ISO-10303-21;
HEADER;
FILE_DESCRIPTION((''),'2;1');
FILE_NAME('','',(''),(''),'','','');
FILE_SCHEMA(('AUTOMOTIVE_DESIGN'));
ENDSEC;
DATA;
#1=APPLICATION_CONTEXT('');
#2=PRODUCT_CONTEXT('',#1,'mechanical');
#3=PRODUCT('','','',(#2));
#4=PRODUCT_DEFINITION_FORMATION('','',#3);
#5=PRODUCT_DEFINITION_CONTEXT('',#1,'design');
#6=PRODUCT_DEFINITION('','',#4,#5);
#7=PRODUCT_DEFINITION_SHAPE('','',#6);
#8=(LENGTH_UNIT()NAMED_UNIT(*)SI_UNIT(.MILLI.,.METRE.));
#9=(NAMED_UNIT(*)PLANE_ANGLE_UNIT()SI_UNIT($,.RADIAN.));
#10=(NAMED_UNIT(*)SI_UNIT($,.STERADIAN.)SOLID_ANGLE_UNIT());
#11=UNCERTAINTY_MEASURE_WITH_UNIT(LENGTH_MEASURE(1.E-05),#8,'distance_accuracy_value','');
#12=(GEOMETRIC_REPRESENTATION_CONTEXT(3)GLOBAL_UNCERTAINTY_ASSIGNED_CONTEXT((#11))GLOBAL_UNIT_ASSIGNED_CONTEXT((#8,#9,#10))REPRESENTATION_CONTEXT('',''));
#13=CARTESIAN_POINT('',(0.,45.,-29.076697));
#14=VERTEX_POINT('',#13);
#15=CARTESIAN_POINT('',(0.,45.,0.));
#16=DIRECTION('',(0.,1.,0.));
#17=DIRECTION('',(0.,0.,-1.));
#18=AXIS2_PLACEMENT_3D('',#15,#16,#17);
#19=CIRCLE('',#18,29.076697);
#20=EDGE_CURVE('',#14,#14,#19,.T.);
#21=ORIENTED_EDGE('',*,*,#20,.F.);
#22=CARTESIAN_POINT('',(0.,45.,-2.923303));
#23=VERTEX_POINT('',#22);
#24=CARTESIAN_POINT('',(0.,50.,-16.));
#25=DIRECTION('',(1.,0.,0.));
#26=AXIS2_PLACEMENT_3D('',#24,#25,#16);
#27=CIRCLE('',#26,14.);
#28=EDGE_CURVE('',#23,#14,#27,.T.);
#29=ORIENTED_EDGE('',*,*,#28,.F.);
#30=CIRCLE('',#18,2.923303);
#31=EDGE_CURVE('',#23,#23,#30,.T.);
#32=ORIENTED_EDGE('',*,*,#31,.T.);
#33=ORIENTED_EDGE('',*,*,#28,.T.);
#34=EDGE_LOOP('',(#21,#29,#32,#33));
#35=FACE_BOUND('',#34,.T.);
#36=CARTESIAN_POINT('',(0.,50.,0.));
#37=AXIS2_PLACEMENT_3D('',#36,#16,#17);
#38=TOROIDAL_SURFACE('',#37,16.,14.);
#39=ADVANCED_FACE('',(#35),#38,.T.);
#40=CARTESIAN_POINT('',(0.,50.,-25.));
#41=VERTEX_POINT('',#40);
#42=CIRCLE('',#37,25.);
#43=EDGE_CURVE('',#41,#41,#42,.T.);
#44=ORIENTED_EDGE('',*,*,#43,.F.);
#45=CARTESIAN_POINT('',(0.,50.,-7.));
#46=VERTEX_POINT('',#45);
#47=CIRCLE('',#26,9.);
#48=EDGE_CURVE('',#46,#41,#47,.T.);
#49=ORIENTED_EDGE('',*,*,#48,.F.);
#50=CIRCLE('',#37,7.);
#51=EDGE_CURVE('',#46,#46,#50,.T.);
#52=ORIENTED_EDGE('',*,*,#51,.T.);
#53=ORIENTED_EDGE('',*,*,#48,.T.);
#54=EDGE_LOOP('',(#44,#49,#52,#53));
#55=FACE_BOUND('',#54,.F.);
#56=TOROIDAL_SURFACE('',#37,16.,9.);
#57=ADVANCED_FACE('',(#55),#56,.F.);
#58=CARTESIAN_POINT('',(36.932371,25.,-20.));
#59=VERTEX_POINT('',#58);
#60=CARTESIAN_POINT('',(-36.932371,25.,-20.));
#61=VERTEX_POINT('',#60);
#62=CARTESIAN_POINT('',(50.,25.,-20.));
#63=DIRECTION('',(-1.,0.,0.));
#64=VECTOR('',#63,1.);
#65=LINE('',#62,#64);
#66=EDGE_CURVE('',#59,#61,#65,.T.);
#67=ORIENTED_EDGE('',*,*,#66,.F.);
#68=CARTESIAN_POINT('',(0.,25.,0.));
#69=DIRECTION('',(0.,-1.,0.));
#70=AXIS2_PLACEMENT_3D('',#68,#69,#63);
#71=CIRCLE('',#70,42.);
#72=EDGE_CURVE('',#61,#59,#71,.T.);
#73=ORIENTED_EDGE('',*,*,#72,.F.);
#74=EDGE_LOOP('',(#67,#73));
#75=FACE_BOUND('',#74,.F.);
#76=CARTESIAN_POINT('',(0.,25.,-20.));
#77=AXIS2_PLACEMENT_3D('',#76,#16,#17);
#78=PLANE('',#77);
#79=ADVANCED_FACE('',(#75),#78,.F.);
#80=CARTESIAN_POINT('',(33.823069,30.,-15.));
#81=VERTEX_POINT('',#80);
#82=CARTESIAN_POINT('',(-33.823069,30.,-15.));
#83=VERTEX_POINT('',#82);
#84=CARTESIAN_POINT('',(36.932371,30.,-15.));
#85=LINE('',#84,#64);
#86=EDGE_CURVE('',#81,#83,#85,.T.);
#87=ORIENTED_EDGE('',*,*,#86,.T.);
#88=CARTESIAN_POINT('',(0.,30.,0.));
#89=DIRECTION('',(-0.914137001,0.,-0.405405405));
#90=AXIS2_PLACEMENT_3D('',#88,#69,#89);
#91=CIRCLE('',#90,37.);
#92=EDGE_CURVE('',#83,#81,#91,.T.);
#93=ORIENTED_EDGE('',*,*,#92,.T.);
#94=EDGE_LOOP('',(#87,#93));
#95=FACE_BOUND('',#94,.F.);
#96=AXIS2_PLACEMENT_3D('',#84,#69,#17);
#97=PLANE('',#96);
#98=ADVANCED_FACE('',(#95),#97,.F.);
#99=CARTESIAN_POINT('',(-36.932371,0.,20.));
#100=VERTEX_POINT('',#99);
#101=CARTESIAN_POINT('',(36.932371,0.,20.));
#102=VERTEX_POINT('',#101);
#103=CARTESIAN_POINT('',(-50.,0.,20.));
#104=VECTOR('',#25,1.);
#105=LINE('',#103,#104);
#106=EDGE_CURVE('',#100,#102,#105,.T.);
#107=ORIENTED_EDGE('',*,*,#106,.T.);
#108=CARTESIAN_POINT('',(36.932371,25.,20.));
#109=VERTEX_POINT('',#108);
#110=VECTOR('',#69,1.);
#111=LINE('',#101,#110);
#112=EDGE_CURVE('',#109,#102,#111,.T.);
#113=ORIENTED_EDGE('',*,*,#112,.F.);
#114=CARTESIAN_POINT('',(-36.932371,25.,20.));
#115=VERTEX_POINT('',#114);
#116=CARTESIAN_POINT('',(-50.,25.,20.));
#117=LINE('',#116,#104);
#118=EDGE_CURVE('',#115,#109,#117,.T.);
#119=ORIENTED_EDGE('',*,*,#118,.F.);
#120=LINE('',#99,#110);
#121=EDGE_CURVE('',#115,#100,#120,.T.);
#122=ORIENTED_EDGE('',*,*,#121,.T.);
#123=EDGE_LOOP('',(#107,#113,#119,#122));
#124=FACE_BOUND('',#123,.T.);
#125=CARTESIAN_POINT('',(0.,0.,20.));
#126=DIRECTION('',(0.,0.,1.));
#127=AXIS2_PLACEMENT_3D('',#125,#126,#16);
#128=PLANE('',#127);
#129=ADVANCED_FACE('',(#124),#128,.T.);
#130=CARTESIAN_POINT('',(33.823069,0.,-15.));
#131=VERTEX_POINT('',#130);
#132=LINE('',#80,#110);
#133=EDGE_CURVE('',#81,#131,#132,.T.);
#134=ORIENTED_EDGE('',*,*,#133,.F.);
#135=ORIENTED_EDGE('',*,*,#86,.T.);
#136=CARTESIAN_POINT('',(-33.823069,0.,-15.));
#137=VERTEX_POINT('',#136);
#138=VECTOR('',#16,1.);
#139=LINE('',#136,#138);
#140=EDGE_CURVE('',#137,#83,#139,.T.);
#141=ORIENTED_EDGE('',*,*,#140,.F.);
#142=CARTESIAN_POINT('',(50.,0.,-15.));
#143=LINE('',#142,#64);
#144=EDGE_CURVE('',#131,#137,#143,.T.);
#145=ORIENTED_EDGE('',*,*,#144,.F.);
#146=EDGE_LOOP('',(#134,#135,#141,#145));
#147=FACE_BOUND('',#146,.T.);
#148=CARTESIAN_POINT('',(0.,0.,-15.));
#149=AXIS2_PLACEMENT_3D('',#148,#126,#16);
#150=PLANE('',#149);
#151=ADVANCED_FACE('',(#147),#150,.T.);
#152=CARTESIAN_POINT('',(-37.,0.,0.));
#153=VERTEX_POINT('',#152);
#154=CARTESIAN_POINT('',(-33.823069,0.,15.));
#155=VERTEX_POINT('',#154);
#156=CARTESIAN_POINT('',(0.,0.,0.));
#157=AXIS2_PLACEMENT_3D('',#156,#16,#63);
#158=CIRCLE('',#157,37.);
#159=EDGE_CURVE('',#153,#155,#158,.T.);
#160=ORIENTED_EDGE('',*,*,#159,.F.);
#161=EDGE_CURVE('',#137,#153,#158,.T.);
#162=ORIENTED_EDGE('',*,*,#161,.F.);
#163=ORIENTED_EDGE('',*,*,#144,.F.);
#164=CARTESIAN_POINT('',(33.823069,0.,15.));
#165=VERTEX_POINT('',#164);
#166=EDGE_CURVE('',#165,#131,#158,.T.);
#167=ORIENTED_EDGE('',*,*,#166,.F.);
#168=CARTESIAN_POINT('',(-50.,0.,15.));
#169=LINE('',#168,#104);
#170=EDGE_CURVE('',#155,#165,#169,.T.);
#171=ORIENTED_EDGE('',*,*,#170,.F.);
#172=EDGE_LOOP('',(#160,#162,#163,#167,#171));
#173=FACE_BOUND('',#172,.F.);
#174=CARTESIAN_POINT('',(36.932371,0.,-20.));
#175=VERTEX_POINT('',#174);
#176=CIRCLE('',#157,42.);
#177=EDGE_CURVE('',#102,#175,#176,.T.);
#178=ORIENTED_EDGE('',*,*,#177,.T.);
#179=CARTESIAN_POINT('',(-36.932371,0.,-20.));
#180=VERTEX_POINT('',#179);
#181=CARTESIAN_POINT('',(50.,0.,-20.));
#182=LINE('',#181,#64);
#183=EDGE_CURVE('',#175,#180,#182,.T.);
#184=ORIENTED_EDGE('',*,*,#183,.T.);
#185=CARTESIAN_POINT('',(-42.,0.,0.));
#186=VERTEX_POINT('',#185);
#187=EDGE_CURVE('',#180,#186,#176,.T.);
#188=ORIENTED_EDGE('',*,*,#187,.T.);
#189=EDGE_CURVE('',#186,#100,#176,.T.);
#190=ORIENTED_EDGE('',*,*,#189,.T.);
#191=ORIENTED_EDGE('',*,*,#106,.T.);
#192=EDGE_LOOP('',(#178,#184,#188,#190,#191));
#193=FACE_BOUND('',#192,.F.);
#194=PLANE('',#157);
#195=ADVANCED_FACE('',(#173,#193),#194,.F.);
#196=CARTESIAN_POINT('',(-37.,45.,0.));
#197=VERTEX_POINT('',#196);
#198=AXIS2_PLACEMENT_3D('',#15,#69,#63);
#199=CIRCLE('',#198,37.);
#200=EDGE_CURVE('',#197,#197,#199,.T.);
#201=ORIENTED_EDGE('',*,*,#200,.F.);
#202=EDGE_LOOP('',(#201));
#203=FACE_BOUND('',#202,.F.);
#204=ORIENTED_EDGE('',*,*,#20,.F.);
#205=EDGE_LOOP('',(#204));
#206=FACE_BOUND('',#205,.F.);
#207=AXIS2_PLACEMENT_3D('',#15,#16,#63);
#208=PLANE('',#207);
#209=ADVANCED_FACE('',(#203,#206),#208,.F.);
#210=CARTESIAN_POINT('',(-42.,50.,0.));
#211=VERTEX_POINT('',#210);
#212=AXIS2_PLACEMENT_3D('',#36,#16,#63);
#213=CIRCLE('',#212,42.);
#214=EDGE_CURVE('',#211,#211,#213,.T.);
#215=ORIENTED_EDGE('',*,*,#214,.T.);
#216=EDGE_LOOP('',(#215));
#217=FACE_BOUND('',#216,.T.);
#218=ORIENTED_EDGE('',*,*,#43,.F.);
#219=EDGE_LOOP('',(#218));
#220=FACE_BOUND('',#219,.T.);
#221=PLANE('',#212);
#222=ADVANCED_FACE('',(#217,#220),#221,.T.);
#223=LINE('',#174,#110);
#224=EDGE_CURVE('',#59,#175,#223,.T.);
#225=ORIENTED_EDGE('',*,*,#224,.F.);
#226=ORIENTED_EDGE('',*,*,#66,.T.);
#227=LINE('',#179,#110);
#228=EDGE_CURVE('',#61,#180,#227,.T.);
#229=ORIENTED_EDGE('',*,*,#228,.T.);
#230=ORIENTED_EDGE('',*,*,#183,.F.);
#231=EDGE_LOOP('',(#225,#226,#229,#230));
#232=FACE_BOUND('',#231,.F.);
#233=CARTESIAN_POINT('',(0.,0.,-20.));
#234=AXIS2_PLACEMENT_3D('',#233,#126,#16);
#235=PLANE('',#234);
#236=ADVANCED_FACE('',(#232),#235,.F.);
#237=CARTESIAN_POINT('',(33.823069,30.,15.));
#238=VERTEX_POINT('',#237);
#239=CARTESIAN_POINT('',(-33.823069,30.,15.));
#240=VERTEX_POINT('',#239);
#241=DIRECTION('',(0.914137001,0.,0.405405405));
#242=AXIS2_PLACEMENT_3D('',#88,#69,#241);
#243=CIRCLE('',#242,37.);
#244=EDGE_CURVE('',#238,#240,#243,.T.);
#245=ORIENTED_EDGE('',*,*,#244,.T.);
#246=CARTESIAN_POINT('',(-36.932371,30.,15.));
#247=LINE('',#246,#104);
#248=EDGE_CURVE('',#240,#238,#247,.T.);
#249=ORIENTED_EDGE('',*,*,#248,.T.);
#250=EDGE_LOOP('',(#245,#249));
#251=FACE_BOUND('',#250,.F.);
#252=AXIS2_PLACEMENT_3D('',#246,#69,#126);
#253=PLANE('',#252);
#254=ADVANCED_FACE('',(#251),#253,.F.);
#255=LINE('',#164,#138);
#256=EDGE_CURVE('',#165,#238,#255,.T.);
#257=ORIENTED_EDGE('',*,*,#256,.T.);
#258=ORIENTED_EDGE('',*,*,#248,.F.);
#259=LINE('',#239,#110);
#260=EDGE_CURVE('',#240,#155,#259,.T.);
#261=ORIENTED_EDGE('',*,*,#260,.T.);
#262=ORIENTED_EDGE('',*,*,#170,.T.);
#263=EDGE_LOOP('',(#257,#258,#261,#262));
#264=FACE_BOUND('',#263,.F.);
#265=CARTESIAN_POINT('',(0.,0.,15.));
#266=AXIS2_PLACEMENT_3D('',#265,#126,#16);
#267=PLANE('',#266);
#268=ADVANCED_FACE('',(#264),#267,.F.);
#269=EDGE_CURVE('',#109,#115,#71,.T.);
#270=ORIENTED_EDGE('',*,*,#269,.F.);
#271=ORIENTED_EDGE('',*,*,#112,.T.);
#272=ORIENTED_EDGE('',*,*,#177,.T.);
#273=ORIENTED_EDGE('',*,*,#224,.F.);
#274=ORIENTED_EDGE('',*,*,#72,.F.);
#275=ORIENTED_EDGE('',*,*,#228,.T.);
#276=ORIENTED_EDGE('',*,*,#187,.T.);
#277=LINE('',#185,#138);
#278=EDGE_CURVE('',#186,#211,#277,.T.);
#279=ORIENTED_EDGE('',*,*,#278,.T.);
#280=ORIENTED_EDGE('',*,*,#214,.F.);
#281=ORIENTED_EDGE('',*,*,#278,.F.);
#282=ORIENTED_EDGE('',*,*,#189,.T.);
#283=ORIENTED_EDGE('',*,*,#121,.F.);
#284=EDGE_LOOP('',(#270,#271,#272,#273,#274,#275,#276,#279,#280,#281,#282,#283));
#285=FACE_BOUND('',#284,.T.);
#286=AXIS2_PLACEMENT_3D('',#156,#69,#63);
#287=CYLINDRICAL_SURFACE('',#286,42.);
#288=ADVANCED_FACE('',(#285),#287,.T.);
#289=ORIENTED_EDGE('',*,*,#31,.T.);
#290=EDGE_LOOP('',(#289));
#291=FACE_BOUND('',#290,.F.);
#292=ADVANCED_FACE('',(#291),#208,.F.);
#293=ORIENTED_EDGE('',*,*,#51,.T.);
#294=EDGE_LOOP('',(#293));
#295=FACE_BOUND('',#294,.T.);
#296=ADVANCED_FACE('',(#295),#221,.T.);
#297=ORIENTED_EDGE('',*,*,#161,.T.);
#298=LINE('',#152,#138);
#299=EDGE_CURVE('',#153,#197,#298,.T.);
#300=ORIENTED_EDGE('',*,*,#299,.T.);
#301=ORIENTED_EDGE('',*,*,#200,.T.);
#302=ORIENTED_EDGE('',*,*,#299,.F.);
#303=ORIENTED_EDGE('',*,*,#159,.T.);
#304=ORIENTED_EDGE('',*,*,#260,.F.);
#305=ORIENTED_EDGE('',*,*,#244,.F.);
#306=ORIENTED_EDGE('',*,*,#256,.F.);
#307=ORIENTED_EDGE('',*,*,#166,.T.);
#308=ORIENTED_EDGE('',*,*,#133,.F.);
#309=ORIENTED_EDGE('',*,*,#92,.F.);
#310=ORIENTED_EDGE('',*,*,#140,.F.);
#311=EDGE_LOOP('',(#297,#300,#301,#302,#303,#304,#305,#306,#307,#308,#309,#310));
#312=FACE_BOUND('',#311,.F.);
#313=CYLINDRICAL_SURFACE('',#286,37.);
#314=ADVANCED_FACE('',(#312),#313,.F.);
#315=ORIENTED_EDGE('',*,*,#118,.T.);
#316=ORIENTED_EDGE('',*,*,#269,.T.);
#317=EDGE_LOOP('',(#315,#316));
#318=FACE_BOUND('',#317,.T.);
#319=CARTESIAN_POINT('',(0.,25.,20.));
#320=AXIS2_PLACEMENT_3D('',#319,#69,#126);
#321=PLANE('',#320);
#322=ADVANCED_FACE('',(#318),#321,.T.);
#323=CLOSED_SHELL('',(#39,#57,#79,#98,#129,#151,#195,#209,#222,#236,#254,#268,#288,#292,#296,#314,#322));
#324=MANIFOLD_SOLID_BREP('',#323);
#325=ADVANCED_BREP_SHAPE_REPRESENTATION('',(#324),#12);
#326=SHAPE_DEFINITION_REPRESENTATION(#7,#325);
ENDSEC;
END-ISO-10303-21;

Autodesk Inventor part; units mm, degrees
ref_plane "YZ Plane" through (0, 0, 0) normal (1, 0, 0) x (0, 1, 0)
ref_plane "XZ Plane" through (0, 0, 0) normal (0, 1, 0) x (-1, 0, 0)
ref_plane "XY Plane" through (0, 0, 0) normal (0, 0, 1) x (1, 0, 0)
sketch "Sketch1" plane through (0, 0, 0) normal (0, 1, 0) x (-1, 0, 0)
  circle A0 centre (0, 0) radius 42
  dimension "d0" = 84
extrude "Extrusion1" add sketch "Sketch1" along normal blind 50
sketch "Sketch3" plane through (0, 0, 0) normal (1, 0, 0) x (0, 1, 0)
  line L0 (50, -42) -> (50, 42) projected
  circle A0 centre (50, -16) radius 9
  line L1 (-11.8, 0) -> (70.8, 0) projected
  line L2 (71.2036, 0) -> (0, 0)
  point P0 (50, -7)
  point P1 (50, -25)
  dimension "d4" = 18
  dimension "d5" = 32
revolve "Revolution1" cut sketch "Sketch3" angle 360 about axis through (0, -10, 0) along (0, 1, 0) picked at (45.6277, -15.2948) contours A0 L0
sketch "Sketch4" plane through (0, 0, 0) normal (1, 0, 0) x (0, 1, 0)
  line L0 (0, -42) -> (0, 42) projected
  line L1 (0, -20) -> (25, -20)
  line L2 (25, -20) -> (25, -95.9961)
  line L3 (25, -95.9961) -> (0, -95.9961)
  line L4 (0, -95.9961) -> (0, -20)
  line L5 (-10, 0) -> (60, 0) projected
  line L6 (0, 20) -> (25, 20)
  line L7 (25, 20) -> (25, 95.9961)
  line L8 (25, 95.9961) -> (0, 95.9961)
  line L9 (0, 95.9961) -> (0, 20)
  point P0 (0, 0)
  dimension "d7" = 25
  dimension "d8" = 20
extrude "Extrusion2" cut sketch "Sketch4" along normal mid plane 100
shell "Shell1" thickness 5 removed faces 1 at (11.381, 0, 4.5482)
properties material "Aluminum 6061"
